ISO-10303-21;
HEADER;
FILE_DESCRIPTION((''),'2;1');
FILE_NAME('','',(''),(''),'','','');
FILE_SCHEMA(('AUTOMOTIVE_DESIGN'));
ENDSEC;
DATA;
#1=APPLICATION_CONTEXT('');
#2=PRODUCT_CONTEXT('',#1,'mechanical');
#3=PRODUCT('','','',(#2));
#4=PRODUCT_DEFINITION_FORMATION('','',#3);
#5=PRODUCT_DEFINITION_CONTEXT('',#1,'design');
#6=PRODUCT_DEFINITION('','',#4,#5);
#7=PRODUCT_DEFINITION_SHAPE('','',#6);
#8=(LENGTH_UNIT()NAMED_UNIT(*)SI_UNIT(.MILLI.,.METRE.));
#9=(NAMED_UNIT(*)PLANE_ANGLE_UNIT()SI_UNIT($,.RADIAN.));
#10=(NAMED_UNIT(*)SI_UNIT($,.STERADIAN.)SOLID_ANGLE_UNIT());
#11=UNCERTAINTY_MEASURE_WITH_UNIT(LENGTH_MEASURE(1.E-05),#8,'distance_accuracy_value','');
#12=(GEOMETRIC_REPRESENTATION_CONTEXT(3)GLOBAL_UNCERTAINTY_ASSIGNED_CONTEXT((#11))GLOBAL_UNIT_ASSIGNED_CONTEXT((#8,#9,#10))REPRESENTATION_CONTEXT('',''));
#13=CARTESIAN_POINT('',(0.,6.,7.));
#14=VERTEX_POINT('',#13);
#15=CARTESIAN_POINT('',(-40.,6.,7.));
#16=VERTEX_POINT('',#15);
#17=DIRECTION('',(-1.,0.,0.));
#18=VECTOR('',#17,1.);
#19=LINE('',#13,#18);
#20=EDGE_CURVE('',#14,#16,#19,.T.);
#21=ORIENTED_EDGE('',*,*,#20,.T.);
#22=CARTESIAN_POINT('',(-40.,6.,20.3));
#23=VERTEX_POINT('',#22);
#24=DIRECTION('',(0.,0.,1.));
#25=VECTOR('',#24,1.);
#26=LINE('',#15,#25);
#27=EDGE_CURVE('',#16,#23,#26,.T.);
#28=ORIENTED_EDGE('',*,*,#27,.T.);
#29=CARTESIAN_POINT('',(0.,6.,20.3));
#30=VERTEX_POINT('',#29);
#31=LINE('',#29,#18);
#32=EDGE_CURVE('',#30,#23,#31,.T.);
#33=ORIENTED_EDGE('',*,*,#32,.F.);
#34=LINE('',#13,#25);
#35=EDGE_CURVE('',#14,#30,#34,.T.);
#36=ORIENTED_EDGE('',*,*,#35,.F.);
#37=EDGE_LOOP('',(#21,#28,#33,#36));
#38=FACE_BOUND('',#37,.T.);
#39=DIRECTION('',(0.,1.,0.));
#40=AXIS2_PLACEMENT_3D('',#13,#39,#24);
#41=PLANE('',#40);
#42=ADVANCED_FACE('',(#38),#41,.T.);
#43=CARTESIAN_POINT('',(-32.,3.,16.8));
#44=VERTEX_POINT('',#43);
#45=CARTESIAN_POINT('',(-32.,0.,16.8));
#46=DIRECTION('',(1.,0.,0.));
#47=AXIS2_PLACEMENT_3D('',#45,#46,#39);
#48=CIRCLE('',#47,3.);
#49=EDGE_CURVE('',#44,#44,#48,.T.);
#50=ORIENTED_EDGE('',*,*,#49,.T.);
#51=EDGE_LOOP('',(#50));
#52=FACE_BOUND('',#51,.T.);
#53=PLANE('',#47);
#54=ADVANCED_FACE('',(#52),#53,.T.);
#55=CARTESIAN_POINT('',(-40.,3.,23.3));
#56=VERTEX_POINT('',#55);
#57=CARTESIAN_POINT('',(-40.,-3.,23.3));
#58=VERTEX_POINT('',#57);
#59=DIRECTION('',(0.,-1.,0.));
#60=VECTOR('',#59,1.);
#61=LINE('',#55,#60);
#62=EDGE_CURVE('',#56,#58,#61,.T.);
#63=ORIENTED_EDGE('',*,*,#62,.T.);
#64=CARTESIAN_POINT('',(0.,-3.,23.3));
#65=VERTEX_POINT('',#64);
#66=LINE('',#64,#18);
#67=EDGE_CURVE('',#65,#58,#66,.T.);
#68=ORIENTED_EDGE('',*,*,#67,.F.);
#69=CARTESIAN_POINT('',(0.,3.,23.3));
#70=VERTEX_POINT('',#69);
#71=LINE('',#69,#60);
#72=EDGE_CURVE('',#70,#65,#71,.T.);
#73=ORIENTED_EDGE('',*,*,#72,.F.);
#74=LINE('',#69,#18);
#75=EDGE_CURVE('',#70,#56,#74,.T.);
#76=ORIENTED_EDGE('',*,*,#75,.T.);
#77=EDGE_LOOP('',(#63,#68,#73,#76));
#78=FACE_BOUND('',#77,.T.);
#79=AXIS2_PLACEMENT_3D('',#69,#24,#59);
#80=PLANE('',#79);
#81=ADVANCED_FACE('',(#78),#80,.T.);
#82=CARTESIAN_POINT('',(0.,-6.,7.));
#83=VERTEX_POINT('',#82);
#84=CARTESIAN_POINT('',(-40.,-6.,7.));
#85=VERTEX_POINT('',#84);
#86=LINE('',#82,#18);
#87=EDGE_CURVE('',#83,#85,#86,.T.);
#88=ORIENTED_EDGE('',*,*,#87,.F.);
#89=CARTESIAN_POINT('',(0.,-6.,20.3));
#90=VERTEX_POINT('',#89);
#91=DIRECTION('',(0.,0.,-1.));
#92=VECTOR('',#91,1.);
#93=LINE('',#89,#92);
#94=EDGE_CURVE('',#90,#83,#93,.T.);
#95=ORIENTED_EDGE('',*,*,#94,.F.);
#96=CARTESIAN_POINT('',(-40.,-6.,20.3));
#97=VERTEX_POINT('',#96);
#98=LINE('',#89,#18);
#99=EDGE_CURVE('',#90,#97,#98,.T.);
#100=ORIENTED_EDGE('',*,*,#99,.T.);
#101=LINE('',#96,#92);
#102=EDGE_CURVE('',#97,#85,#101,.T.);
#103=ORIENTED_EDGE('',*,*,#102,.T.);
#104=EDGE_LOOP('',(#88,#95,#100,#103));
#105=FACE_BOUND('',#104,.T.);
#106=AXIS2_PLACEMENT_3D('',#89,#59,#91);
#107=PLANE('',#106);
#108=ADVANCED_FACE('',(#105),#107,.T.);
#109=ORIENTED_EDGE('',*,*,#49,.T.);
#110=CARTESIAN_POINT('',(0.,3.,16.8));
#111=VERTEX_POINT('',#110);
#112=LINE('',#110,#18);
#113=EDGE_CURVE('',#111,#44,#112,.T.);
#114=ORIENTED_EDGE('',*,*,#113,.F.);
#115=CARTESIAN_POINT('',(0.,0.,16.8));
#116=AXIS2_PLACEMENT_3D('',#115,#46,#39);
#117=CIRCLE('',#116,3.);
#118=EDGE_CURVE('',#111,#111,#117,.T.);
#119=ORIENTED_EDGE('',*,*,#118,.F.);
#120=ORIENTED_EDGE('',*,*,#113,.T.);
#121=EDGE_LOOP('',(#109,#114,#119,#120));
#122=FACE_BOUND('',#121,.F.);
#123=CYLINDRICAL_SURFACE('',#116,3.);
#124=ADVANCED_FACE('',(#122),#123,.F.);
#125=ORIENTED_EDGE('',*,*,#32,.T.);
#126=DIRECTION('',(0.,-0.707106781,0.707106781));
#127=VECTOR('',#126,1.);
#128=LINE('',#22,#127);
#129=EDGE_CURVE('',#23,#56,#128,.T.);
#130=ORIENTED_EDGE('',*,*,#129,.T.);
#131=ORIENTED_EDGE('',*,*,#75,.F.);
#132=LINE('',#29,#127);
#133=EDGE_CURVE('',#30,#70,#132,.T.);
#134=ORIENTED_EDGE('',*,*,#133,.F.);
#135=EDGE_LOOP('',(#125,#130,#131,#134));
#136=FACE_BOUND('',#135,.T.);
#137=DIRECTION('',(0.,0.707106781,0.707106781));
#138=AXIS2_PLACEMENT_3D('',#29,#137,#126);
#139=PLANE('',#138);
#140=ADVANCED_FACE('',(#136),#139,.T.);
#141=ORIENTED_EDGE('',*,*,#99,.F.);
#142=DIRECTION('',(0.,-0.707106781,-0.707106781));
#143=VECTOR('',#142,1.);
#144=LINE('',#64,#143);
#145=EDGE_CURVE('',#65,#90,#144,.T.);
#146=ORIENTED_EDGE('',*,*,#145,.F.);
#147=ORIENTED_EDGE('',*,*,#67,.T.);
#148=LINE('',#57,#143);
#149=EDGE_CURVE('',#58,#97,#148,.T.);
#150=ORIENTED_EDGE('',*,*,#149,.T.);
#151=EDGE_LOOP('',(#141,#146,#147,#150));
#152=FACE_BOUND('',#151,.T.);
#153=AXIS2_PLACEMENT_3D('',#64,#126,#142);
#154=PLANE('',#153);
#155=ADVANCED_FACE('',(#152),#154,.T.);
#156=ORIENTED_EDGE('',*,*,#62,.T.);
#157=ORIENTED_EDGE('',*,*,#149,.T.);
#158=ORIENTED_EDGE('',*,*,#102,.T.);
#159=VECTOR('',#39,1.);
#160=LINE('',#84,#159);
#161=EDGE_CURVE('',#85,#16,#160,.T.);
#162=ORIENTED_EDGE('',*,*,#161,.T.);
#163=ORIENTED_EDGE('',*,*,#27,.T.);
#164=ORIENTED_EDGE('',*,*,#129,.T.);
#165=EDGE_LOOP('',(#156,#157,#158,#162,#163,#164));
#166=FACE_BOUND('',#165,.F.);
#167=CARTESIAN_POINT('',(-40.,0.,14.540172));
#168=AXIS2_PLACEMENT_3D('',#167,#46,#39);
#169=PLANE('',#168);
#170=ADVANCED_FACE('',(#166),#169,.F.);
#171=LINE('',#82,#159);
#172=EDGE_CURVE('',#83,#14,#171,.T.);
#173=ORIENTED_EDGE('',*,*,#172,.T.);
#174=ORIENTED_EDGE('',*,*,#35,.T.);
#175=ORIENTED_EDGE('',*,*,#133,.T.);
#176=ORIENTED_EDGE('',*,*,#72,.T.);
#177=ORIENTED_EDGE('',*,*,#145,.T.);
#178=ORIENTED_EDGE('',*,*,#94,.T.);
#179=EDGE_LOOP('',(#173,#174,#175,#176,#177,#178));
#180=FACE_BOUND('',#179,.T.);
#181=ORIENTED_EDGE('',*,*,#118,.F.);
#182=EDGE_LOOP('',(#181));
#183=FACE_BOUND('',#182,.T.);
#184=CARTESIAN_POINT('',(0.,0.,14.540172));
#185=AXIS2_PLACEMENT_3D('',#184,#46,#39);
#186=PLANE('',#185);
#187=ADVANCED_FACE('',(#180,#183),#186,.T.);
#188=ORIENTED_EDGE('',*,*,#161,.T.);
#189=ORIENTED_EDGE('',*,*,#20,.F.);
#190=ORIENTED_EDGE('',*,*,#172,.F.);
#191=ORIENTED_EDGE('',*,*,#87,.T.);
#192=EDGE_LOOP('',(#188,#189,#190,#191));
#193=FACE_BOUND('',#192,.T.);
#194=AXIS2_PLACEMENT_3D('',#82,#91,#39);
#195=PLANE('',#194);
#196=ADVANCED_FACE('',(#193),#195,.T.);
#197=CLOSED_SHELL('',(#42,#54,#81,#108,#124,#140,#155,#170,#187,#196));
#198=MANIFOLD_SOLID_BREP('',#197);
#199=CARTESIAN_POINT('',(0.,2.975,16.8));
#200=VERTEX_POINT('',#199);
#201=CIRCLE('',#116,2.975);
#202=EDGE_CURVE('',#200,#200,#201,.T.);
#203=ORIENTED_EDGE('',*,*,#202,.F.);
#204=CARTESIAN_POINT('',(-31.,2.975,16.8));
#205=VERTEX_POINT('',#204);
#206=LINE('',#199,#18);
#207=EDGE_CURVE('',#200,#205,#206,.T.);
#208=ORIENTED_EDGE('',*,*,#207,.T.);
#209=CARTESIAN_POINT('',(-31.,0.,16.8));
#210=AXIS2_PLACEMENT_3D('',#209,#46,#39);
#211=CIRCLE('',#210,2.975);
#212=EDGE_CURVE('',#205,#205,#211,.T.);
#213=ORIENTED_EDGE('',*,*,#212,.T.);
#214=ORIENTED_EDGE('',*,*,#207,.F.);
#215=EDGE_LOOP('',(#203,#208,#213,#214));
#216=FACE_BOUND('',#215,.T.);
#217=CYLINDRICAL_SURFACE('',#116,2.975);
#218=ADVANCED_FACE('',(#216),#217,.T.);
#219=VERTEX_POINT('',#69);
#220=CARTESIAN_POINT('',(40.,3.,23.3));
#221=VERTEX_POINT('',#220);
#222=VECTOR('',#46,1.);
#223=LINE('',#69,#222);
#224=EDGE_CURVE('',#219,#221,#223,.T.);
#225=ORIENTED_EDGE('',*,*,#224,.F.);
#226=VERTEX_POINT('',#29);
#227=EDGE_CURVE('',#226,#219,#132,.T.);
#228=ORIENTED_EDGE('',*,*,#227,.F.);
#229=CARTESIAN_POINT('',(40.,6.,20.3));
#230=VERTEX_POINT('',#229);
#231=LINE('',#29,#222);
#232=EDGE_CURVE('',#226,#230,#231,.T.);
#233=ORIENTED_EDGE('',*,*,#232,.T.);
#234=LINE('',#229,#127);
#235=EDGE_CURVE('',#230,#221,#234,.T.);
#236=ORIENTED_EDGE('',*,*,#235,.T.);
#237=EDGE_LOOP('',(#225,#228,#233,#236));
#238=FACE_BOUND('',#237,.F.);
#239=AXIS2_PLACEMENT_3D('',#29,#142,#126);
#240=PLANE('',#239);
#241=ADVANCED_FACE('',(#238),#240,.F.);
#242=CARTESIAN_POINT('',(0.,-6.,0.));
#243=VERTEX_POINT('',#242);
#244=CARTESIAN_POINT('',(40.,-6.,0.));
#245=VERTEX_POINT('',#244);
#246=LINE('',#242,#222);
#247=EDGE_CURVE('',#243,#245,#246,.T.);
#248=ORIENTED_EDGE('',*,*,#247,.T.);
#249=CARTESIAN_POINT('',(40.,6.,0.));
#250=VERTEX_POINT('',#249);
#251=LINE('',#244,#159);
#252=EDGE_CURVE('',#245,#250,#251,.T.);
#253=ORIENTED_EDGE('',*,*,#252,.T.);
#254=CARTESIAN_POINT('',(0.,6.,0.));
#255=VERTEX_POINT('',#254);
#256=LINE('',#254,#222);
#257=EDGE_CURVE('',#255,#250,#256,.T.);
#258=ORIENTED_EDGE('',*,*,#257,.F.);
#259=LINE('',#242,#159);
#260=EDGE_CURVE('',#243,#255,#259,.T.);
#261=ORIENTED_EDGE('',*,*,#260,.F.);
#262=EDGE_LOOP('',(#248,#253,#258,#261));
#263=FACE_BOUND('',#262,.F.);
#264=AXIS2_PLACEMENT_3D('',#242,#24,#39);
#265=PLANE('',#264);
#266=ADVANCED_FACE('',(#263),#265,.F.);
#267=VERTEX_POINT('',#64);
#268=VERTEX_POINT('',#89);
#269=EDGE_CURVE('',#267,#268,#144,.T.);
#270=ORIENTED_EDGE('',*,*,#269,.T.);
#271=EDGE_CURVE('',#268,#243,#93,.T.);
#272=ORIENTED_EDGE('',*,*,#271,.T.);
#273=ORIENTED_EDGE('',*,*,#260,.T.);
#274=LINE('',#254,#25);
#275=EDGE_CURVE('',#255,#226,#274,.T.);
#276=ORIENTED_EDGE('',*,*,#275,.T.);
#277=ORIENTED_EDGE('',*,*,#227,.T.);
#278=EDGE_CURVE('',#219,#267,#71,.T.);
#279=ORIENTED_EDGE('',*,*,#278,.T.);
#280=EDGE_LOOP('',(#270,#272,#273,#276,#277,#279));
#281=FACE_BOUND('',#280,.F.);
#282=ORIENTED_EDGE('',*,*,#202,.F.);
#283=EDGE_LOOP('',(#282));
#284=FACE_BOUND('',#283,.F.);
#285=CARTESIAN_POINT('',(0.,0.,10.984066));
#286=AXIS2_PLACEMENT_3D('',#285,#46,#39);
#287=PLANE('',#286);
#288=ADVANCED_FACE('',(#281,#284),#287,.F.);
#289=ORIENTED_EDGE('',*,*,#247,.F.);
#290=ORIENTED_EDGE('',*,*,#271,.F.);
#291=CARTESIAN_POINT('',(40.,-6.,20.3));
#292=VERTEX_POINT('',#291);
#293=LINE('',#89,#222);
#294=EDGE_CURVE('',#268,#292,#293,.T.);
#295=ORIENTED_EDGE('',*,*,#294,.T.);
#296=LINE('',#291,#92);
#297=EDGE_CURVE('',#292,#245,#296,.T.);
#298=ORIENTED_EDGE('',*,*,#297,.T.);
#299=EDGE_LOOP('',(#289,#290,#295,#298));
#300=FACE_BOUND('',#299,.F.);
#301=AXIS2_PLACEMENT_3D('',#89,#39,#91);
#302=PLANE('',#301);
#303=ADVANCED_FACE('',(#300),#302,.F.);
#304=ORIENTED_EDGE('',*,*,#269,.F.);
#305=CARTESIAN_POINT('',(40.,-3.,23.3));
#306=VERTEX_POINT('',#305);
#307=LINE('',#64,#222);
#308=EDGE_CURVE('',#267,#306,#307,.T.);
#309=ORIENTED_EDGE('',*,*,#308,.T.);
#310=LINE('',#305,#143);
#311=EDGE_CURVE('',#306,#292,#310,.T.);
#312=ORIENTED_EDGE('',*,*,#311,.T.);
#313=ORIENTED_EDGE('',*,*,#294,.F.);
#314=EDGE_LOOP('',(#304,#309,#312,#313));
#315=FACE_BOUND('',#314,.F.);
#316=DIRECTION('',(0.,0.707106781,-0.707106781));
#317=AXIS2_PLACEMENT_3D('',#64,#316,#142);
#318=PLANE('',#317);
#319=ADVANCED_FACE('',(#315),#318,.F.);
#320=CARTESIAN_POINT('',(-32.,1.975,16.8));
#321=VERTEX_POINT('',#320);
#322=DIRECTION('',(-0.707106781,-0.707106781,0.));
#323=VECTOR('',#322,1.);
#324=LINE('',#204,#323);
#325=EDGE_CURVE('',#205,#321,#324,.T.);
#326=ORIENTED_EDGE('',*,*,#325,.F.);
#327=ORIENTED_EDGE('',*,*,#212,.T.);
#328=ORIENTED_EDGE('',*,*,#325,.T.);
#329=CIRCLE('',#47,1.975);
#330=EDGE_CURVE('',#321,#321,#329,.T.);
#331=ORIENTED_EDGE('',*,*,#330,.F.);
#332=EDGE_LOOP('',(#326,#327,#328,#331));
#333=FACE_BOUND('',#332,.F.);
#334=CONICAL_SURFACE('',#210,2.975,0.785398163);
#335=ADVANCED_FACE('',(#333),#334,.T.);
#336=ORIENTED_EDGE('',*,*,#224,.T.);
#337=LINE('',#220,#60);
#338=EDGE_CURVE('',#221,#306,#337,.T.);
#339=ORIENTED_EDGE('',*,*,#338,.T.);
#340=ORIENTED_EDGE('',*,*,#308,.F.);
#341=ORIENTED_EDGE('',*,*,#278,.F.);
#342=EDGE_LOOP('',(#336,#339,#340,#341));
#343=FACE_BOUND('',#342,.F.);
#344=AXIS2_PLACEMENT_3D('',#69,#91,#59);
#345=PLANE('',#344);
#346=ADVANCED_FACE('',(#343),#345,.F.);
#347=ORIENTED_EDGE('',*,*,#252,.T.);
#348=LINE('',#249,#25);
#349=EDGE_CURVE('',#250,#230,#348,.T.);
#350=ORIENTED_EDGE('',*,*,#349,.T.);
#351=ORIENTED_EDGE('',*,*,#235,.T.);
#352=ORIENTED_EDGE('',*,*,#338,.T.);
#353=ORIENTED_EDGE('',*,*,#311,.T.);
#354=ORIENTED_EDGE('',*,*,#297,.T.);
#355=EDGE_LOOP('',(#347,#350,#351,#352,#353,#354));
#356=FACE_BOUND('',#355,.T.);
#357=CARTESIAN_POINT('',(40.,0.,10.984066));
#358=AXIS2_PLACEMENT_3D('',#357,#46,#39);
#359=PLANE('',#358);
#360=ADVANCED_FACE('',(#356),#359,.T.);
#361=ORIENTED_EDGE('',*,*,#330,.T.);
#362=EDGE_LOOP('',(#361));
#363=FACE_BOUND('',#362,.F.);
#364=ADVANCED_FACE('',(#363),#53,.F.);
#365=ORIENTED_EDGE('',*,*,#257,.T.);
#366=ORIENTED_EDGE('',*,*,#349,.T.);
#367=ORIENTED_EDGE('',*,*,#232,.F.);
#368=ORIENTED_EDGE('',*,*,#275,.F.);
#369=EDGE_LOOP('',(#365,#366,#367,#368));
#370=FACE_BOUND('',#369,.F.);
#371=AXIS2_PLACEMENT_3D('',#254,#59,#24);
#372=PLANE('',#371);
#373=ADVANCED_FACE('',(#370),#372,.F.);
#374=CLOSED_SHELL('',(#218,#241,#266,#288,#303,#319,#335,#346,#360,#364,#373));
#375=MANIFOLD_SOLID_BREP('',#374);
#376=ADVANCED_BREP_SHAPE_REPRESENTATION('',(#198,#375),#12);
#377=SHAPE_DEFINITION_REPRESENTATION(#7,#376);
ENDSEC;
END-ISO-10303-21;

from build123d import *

# Parameters (mm, degrees)
F1_DEPTH = 40
F2_R     = 2.975
F3_DEPTH = 32
F4_SIZE  = 1
F6_DEPTH = 40
F7_R     = 3
F8_DEPTH = 32


with BuildPart() as f1:
    # F0 (on Right) → F1 (new body)
    with BuildSketch(Plane.YZ):
        Polygon((-6, 20.3), (-6, 0), (6, 0), (6, 20.3), (3, 23.3), (-3, 23.3), align=None)
    extrude(amount=F1_DEPTH)

    # F2 (on face) → F3 (join)
    with BuildSketch(Plane.YZ):
        with Locations((0, 16.8)):
            Circle(F2_R)
    extrude(amount=-F3_DEPTH)

    # F4
    f4_edges = [f1.edges().sort_by_distance(p)[0] for p in [
        (-32, -2.975, 16.8),
    ]]
    chamfer(f4_edges, length=F4_SIZE)


with BuildPart() as f6:
    # F5 (on face) → F6 (new body)
    with BuildSketch(Plane.YZ):
        Polygon((-6, 20.3), (-6, 7), (6, 7), (6, 20.3), (3, 23.3), (-3, 23.3), align=None)
    extrude(amount=-F6_DEPTH)

    # F7 (on face) → F8 (cut)
    with BuildSketch(Plane.YZ):
        with Locations((0, 16.8)):
            Circle(F7_R)
    extrude(amount=-F8_DEPTH, mode=Mode.SUBTRACT)


solid = Compound([f1.part, f6.part])
